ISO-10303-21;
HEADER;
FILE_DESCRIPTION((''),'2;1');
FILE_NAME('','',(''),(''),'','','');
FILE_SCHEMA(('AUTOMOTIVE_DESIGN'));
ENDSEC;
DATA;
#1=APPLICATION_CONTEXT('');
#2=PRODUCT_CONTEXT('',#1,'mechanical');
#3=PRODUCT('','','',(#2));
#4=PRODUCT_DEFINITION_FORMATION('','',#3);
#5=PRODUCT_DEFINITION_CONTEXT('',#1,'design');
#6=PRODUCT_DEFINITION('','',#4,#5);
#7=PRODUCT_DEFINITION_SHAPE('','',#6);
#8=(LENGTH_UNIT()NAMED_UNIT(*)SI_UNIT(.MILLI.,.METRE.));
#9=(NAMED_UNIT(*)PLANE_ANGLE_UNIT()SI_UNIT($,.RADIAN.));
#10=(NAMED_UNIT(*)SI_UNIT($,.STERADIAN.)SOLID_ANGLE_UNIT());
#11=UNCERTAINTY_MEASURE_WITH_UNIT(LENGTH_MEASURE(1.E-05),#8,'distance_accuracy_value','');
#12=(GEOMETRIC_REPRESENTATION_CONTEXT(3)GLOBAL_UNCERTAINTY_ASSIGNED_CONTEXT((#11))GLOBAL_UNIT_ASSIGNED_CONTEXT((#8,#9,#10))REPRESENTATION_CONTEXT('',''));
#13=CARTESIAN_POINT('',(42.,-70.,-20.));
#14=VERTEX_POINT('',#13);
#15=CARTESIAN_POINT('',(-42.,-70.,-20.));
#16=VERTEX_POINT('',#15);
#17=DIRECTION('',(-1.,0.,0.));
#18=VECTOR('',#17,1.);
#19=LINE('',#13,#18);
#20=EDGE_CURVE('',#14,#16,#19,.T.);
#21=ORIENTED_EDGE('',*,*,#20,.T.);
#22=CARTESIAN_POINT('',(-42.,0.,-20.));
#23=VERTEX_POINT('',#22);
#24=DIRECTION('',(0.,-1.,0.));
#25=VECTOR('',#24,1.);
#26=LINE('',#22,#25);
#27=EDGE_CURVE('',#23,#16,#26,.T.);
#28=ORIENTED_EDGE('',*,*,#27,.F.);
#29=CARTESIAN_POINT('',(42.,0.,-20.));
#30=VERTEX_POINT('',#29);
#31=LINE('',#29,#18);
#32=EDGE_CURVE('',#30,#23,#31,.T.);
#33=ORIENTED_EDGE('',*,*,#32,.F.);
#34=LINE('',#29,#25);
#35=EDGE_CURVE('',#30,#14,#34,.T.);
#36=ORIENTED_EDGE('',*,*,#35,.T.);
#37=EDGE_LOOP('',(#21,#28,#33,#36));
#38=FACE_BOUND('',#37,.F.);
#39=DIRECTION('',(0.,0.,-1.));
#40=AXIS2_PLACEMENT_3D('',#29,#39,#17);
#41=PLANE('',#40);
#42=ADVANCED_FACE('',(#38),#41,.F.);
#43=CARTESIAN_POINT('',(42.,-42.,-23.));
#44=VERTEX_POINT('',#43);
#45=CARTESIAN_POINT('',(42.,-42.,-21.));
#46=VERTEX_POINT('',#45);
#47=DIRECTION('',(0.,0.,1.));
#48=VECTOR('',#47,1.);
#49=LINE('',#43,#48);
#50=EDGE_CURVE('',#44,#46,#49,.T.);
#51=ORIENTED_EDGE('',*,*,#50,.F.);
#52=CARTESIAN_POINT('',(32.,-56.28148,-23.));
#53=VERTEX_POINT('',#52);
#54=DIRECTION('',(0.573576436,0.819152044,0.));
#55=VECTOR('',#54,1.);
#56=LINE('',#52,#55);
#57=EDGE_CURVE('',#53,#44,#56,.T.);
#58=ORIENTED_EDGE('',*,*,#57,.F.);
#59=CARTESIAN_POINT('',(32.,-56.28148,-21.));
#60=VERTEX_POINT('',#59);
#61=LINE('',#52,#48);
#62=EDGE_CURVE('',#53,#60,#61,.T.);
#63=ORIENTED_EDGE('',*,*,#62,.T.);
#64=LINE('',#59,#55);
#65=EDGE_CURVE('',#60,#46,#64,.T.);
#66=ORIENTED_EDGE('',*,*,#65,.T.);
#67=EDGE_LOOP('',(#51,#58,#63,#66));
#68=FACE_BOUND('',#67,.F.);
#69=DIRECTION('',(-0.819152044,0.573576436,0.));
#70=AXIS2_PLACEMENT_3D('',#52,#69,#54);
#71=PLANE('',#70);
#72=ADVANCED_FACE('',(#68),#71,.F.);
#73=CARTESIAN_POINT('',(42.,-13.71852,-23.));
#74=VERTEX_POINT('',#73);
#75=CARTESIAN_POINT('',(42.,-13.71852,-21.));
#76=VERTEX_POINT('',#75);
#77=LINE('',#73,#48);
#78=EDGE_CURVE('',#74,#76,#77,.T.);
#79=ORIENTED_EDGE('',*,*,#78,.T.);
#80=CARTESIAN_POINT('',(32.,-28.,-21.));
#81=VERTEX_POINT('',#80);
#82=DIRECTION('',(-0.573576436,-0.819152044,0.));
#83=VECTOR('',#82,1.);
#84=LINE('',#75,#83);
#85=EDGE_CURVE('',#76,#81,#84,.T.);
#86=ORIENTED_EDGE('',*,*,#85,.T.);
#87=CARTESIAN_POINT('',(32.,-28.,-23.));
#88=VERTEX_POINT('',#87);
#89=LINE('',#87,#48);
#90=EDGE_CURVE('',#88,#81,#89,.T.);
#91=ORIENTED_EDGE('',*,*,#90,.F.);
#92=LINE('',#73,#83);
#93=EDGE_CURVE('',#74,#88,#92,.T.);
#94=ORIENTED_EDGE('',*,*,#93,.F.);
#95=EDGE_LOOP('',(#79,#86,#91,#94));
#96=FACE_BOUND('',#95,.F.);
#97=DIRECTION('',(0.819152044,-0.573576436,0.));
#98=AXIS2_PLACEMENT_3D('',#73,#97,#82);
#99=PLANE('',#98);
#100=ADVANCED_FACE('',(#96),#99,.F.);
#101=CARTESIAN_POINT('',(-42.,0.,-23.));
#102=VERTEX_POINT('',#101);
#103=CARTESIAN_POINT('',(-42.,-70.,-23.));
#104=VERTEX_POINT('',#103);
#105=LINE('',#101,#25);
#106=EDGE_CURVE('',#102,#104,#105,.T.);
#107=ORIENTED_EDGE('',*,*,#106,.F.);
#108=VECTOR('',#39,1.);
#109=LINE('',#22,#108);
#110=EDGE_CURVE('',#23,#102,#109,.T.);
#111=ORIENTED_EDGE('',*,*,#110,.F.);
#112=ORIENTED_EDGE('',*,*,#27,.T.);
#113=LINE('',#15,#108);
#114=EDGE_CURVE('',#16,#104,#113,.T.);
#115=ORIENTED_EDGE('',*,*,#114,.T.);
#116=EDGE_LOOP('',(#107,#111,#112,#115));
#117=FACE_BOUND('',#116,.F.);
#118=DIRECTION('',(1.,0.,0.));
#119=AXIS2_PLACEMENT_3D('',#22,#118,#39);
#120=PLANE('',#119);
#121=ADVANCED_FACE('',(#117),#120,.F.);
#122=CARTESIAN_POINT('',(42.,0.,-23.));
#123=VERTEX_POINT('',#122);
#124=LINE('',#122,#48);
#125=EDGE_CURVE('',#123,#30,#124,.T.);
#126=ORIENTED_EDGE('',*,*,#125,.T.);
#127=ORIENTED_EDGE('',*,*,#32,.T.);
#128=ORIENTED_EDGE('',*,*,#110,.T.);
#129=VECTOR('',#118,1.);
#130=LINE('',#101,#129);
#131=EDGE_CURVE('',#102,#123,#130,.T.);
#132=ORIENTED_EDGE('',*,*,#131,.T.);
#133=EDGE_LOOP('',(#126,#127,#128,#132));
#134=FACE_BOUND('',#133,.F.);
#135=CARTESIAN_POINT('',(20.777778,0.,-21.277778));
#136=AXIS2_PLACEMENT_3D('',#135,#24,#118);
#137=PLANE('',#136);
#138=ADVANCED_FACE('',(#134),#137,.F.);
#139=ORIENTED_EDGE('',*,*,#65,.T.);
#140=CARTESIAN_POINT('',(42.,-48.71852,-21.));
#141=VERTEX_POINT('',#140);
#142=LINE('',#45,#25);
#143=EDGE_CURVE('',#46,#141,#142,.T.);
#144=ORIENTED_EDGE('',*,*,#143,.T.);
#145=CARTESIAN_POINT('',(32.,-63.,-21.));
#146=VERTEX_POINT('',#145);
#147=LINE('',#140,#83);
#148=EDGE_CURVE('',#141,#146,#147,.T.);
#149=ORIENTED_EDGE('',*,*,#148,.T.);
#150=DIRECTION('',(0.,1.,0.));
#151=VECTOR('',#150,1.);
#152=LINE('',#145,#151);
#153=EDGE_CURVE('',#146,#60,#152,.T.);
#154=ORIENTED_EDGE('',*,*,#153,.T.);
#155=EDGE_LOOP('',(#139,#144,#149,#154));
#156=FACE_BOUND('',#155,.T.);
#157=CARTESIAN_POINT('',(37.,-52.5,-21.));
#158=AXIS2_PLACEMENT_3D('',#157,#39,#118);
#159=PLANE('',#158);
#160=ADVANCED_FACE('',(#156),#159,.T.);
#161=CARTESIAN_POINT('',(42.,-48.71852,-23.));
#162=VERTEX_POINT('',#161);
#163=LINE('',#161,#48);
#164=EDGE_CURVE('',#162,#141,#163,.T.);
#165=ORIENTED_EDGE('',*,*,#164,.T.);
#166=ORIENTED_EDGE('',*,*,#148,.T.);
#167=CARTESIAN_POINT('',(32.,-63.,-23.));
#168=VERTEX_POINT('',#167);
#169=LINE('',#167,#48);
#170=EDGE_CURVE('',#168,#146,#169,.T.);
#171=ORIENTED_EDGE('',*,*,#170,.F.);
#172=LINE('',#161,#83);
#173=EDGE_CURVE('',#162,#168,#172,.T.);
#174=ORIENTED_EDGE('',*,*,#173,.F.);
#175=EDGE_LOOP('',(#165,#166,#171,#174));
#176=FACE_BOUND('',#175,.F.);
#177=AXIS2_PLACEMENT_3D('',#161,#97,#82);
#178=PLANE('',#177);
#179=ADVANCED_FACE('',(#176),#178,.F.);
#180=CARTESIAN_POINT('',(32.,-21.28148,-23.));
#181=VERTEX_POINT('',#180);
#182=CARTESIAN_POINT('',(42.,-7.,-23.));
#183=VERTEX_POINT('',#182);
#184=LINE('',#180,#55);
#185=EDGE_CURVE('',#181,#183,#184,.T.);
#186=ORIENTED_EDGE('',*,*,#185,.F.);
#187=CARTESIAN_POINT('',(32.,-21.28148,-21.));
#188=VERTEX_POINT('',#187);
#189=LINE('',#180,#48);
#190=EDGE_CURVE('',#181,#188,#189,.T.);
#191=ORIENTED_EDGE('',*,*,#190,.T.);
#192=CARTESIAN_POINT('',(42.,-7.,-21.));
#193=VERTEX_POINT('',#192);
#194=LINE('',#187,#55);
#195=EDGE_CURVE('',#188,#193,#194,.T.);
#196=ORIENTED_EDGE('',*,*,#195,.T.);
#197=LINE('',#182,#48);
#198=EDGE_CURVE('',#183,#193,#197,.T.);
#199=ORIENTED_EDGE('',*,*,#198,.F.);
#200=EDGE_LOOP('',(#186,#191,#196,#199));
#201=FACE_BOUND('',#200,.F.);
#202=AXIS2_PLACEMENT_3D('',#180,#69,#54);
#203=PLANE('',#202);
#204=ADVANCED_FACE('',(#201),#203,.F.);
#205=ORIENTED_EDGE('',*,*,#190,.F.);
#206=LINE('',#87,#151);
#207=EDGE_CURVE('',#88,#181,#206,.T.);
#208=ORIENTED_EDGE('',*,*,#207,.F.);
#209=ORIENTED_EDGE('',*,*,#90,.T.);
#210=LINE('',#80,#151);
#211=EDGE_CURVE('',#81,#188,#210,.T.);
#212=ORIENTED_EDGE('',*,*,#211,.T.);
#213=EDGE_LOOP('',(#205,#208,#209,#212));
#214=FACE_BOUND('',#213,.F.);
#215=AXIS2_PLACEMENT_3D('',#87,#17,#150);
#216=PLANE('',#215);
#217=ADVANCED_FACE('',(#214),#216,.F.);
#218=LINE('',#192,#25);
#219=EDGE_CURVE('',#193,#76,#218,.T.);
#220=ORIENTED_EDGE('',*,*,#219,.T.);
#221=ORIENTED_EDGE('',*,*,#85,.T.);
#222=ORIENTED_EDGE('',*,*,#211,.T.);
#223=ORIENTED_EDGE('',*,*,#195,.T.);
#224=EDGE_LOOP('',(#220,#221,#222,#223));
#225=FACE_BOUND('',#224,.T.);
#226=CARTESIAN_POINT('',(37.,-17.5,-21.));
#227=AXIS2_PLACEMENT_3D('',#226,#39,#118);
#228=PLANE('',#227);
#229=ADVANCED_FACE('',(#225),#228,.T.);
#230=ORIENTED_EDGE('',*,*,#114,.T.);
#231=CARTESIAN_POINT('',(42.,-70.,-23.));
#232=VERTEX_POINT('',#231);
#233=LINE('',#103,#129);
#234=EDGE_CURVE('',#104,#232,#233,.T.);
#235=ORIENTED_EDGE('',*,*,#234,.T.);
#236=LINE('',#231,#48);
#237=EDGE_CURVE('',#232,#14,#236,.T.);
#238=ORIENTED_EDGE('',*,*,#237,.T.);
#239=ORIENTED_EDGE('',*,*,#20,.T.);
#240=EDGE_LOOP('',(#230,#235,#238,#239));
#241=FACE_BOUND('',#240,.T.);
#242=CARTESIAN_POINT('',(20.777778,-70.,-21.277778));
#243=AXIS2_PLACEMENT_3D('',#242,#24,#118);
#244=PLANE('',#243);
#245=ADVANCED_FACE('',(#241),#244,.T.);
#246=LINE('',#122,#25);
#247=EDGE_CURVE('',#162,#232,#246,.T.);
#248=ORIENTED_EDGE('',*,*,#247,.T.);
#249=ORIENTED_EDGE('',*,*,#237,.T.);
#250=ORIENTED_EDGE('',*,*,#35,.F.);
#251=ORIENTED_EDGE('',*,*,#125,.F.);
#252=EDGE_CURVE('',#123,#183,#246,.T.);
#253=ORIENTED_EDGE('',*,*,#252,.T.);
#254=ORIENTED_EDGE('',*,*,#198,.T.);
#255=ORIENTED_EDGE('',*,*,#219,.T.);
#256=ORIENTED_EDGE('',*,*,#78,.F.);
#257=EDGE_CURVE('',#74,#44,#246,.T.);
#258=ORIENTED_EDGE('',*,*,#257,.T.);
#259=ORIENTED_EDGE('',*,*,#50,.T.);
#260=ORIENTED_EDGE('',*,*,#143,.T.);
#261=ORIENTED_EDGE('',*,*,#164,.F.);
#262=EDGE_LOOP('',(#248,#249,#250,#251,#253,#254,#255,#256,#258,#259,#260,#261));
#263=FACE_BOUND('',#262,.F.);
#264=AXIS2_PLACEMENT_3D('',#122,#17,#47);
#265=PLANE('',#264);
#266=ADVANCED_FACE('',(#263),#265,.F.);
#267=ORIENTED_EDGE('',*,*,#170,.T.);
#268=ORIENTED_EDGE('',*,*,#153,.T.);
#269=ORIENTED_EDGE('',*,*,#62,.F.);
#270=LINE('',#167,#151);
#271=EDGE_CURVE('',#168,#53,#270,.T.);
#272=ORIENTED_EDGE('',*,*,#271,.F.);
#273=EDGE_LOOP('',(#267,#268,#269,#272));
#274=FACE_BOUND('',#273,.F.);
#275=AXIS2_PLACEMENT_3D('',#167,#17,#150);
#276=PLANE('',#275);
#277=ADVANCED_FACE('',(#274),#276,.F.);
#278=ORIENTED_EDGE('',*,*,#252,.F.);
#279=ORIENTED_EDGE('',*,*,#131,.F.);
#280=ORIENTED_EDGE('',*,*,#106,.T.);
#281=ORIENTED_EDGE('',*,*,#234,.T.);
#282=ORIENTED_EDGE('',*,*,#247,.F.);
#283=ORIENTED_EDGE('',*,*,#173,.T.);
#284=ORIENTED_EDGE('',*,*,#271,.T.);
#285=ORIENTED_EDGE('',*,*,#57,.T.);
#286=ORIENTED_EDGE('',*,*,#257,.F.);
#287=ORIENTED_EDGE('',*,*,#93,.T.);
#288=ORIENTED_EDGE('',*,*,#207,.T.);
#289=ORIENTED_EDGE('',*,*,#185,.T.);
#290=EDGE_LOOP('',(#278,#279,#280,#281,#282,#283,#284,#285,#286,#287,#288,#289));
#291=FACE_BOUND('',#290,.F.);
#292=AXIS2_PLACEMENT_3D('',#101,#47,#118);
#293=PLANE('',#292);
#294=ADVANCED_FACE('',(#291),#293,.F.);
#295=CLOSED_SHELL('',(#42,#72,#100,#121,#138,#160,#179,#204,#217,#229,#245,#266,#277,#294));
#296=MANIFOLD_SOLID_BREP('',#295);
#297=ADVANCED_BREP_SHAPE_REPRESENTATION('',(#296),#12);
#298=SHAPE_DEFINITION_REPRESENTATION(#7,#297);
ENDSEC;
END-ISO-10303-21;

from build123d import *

# Parameters (mm, degrees)
F1_DEPTH = 70
F3_DEPTH = 2


# Not quite as in the source:
# - a feature names something its author has since deleted; it is built from what else it names


with BuildPart() as f1:
    # F0 (on Front) → F1 (new body)
    with BuildSketch(Plane.XZ):
        Polygon((0, -20), (0, -23), (32, -23), (32, -21), (38, -21), (42, -21), (42, -20), align=None)
        Polygon((-32, -23), (0, -23), (0, -20), (-17, -20), (-21, -20), (-30, -20), (-34, -20), (-34, -21), (-32, -21), align=None)
        Polygon((32, -21), (32, -23), (38, -23), (38, -22.25), (38, -21), align=None)
        Polygon((-38, -23), (-32, -23), (-32, -21), (-34, -21), (-38, -21), (-38, -22.25), align=None)
        Polygon((38, -22.25), (38, -23), (42, -23), (42, -21), (38, -21), align=None)
        Polygon((-42, -23), (-38, -23), (-38, -22.25), (-38, -21), (-42, -21), align=None)
        Polygon((-38, -21), (-34, -21), (-34, -20), (-42, -20), (-42, -21), align=None)
    extrude(amount=F1_DEPTH)

    # F2 (on face) → F3 (cut)
    with BuildSketch(Plane(origin=(0, 0, -23), x_dir=(1, 0, 0), z_dir=(0, 0, -1))):
        Polygon((42, 42), (42, 48.7185199326), (32, 63), (32, 56.2814800674), align=None)
        Polygon((42, 7), (42, 13.7185199326), (32, 28), (32, 21.2814800674), align=None)
    extrude(amount=-F3_DEPTH, mode=Mode.SUBTRACT)


solid = f1.part
